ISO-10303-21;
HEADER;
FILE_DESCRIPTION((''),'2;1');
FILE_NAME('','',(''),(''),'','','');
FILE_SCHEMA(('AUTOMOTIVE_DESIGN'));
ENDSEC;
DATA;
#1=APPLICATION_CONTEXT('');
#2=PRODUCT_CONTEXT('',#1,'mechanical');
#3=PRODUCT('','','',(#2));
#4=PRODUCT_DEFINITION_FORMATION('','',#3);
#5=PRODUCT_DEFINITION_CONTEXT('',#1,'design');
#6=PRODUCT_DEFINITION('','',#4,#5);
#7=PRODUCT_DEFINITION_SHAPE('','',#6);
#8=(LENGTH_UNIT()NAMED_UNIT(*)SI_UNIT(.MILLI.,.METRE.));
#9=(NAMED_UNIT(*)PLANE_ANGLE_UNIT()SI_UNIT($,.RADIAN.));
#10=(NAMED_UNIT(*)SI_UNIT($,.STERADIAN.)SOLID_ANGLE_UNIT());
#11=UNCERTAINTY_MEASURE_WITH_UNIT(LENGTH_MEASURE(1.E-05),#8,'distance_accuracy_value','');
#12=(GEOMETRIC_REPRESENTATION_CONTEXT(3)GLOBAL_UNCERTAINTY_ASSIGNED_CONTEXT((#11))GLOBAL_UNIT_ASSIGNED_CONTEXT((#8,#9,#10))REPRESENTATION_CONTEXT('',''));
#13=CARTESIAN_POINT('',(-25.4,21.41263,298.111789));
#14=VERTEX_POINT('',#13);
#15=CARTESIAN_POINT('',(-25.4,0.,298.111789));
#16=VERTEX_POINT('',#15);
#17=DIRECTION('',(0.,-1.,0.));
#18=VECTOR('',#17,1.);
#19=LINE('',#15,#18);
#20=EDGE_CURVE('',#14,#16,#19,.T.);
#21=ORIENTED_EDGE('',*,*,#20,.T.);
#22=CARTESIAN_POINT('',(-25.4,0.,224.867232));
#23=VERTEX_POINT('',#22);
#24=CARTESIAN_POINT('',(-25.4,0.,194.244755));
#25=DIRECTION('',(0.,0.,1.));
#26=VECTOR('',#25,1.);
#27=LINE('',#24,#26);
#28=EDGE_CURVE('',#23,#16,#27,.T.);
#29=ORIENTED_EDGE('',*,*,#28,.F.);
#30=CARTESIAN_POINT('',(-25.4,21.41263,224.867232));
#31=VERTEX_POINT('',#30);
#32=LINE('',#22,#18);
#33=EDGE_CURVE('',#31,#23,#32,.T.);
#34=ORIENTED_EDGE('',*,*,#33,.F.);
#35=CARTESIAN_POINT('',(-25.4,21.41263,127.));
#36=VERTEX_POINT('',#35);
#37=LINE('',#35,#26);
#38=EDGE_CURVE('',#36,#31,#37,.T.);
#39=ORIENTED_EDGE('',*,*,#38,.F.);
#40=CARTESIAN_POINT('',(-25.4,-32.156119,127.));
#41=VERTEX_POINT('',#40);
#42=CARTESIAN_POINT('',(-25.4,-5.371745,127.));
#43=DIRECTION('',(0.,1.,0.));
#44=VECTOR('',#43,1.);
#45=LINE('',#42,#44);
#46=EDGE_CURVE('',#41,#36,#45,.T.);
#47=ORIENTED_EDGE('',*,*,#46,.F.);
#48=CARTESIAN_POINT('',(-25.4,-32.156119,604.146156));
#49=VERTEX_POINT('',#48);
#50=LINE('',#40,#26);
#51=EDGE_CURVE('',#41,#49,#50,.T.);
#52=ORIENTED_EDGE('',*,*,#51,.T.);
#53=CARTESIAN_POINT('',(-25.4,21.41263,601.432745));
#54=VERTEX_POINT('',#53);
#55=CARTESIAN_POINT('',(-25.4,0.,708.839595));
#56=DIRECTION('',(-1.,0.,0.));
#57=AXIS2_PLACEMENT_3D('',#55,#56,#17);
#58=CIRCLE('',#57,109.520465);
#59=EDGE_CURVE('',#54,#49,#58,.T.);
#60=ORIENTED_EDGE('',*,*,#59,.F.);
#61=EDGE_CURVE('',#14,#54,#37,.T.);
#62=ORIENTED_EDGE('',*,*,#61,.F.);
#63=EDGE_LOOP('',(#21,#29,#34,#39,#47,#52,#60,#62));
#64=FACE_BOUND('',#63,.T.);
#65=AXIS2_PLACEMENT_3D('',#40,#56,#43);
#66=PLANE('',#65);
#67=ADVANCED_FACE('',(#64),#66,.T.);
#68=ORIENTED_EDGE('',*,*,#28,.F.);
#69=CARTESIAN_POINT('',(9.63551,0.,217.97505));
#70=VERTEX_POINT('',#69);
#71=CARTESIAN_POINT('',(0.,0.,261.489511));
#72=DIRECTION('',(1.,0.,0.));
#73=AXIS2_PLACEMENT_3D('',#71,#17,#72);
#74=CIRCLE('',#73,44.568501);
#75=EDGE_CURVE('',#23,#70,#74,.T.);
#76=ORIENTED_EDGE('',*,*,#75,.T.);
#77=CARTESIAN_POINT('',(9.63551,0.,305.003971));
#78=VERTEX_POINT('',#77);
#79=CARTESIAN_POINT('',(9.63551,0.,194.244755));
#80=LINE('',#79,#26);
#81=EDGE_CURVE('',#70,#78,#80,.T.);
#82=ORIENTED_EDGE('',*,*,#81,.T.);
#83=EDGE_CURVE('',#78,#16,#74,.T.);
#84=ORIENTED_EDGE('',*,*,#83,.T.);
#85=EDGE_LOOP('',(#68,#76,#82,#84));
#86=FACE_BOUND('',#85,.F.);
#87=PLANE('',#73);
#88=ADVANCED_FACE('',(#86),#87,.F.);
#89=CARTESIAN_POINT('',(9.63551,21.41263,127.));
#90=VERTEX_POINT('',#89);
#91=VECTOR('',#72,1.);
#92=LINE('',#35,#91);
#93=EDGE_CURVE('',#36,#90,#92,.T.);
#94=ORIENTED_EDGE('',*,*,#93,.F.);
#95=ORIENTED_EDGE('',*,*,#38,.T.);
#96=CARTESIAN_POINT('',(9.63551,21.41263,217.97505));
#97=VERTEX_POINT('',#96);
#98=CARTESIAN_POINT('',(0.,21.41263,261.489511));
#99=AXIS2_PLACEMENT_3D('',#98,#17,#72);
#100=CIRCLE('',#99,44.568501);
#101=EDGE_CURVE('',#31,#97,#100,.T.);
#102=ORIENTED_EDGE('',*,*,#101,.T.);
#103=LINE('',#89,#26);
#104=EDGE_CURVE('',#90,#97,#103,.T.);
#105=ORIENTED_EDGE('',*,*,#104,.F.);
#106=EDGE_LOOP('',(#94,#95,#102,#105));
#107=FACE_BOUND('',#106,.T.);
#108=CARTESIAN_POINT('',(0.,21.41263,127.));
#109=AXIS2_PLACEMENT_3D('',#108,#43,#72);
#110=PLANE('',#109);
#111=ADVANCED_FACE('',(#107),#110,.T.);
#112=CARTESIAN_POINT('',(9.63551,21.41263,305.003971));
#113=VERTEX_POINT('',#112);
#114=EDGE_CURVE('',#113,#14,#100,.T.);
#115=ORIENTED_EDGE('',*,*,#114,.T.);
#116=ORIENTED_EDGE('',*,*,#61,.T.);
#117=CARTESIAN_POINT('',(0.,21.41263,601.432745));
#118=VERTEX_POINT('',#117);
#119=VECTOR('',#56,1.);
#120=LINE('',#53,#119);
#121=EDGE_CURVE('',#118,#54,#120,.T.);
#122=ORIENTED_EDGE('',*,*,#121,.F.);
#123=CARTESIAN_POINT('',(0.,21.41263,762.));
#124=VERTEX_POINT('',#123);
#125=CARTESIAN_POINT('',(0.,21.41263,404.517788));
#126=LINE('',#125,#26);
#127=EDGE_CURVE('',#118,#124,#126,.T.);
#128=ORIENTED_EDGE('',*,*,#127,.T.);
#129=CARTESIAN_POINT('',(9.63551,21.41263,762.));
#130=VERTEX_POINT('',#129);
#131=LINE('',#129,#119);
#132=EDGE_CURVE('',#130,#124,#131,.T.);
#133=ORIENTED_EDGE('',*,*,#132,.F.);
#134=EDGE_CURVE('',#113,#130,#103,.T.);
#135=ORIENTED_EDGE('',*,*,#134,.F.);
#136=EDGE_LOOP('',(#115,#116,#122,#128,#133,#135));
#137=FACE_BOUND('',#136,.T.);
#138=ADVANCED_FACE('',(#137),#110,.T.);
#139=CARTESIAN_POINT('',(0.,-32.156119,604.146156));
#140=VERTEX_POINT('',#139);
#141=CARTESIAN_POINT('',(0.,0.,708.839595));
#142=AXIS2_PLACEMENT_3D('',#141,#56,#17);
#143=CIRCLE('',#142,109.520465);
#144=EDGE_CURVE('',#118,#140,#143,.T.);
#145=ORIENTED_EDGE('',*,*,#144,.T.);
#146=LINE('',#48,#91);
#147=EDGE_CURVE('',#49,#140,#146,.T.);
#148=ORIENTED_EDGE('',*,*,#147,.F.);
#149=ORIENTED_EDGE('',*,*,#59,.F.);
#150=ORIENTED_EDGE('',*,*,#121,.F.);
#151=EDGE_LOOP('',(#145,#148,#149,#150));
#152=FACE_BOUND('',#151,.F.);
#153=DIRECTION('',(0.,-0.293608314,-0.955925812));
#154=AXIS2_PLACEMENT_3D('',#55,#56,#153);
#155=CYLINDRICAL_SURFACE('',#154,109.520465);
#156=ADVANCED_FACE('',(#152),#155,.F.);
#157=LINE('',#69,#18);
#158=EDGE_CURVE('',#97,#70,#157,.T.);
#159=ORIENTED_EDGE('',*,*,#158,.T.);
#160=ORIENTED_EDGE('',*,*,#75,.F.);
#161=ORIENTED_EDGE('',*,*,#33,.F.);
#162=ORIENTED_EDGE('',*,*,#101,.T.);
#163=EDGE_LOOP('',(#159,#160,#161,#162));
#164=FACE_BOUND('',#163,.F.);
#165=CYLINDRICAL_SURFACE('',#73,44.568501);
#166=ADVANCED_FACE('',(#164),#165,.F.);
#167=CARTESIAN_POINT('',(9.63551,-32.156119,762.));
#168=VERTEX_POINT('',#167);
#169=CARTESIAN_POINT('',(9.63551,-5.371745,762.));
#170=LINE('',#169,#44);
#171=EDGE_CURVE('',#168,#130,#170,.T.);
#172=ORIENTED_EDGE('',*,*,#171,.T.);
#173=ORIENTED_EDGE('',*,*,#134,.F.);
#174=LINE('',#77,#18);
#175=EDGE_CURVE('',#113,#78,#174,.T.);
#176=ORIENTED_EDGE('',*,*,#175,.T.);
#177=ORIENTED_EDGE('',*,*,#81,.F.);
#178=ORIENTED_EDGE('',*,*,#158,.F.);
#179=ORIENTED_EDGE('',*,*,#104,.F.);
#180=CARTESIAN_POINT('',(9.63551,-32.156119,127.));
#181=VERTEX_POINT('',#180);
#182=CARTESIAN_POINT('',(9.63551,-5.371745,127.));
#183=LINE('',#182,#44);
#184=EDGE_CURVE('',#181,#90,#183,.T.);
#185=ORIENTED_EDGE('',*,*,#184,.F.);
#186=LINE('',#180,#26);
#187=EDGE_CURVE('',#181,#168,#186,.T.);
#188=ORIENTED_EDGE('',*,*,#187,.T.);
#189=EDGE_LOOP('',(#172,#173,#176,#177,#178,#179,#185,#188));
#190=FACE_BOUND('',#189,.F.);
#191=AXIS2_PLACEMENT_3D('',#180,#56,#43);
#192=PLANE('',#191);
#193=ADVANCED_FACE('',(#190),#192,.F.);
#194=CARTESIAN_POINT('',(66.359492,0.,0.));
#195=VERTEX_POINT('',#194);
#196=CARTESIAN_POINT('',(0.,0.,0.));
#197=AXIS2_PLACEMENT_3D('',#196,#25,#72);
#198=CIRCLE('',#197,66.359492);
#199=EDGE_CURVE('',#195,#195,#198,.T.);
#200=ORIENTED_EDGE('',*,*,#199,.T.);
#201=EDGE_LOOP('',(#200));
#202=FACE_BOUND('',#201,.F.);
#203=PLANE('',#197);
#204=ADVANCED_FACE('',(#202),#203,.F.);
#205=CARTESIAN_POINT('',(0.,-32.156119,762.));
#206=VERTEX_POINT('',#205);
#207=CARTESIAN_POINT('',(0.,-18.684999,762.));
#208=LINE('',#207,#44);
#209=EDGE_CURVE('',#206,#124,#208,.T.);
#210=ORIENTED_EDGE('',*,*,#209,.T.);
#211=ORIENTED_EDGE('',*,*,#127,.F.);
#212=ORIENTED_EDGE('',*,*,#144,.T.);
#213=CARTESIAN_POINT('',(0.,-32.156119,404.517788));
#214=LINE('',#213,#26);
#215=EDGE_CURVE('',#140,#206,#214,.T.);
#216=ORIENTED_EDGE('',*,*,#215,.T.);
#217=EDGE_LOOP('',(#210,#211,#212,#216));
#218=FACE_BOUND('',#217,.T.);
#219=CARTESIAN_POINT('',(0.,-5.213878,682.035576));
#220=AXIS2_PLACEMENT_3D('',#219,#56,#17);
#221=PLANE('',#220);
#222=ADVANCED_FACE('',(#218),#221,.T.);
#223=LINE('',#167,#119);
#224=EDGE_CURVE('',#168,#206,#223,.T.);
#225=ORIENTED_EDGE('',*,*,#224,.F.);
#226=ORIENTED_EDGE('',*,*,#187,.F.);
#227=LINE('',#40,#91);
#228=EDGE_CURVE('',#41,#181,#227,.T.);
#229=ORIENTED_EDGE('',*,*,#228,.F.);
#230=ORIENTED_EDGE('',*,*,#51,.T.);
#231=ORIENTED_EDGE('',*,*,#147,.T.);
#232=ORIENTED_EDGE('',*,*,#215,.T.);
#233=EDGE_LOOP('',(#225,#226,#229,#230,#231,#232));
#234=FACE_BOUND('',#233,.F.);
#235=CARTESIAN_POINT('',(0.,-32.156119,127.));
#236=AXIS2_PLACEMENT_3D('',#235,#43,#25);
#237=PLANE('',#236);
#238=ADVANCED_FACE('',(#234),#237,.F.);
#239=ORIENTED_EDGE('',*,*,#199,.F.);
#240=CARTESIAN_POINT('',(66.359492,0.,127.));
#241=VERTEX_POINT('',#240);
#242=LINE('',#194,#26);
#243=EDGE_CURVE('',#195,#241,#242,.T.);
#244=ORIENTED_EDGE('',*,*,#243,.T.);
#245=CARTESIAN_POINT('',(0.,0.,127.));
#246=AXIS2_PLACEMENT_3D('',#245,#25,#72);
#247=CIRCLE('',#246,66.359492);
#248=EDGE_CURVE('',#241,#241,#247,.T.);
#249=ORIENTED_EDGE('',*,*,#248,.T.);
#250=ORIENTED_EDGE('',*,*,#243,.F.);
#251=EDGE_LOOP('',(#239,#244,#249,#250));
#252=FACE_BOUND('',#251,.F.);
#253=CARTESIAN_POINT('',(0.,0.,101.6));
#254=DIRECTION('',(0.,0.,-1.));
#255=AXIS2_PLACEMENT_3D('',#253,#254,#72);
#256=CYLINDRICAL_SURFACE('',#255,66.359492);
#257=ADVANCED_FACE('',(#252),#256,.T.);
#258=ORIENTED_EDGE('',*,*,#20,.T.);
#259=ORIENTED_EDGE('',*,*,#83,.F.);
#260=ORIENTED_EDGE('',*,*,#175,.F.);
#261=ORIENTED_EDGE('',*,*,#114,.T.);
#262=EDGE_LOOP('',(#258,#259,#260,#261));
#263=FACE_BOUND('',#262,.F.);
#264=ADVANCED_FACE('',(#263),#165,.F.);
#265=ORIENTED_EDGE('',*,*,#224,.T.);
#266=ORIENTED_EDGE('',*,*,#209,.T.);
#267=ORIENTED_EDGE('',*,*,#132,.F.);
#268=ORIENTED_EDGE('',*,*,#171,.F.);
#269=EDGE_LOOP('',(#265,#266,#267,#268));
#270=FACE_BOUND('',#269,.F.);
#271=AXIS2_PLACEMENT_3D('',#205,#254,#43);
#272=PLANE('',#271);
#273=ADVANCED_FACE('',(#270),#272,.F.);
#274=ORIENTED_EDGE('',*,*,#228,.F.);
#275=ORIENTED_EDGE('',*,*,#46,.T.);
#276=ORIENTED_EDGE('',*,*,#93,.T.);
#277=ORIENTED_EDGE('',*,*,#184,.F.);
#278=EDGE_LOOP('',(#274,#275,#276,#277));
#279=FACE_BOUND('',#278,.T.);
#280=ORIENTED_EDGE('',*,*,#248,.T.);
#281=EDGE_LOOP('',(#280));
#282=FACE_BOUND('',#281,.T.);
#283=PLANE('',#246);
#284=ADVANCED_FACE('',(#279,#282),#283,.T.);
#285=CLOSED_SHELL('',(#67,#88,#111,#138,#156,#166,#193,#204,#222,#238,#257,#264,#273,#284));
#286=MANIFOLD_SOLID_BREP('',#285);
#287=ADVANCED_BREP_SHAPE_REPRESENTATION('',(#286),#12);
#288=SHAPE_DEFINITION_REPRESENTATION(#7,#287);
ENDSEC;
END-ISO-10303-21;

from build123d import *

# Parameters (mm, degrees)
F0_R      = 66.359491572
F1_DEPTH  = 101.6
F2_DEPTH  = 25.4
F3_W      = 9.6355099231
F3_H      = 53.5687487572
F4_DEPTH  = 635
F5_DEPTH  = 25.4
F9_DEPTH  = 25.4
F10_R     = 44.5685010644
F11_DEPTH = 25.4


# Not quite as in the source:
# - the program builds the solid bodies; features that only make, move or delete a surface that nothing else refers to are left out


with BuildPart() as f1:
    # F0 (on Top) → F1 (new body)
    with BuildSketch(Plane.XY):
        Circle(F0_R)
    extrude(amount=F1_DEPTH)

    # F2 (add): a face of the model
    f2_faces = [f1.faces().sort_by_distance(p)[0] for p in [
        (0, 0, 101.6),
    ]]
    extrude(f2_faces, amount=F2_DEPTH)

    # F3 (on face) → F4 (join)
    with BuildSketch(Plane.XY.offset(127)):
        with Locations((4.8177549616, -5.3717447445)):
            Rectangle(F3_W, F3_H)
    extrude(amount=F4_DEPTH)

    # F5 (add): a face of the model
    f5_faces = [f1.faces().sort_by_distance(p)[0] for p in [
        (0, -5.3717447445, 444.5),
    ]]
    extrude(f5_faces, amount=F5_DEPTH)

    # F8 (on face) → F9 (cut)
    with BuildSketch(Plane(origin=(-25.4, 0, 0), x_dir=(0, -1, 0), z_dir=(-1, 0, 0))):
        with BuildLine():
            Line((-21.4126296341, 762), (-21.4126296341, 601.4327447423))
            ThreePointArc((-21.4126296341, 601.4327447423), (5.5404234134, 599.4593595949), (32.1561191231, 604.1461558799))
            Line((32.1561191231, 604.1461558799), (32.1561191231, 762))
            Line((32.1561191231, 762), (-21.4126296341, 762))
        make_face()
        with BuildLine():
            ThreePointArc((32.1561191231, 604.1461558799), (88.0808871948, 643.7512740199), (109.5204650209, 708.8395953178))
            ThreePointArc((109.5204650209, 708.8395953178), (-69.4608202642, 793.5150150489), (-21.4126296341, 601.4327447423))
            Line((-21.4126296341, 601.4327447423), (-21.4126296341, 762))
            Line((-21.4126296341, 762), (32.1561191231, 762))
            Line((32.1561191231, 762), (32.1561191231, 604.1461558799))
        make_face()
    extrude(amount=-F9_DEPTH, mode=Mode.SUBTRACT)

    # F10 (on Front) → F11 (cut)
    with BuildSketch(Plane.XZ):
        with Locations((0, 261.4895105362)):
            Circle(F10_R)
    extrude(amount=-F11_DEPTH, mode=Mode.SUBTRACT)


solid = f1.part
